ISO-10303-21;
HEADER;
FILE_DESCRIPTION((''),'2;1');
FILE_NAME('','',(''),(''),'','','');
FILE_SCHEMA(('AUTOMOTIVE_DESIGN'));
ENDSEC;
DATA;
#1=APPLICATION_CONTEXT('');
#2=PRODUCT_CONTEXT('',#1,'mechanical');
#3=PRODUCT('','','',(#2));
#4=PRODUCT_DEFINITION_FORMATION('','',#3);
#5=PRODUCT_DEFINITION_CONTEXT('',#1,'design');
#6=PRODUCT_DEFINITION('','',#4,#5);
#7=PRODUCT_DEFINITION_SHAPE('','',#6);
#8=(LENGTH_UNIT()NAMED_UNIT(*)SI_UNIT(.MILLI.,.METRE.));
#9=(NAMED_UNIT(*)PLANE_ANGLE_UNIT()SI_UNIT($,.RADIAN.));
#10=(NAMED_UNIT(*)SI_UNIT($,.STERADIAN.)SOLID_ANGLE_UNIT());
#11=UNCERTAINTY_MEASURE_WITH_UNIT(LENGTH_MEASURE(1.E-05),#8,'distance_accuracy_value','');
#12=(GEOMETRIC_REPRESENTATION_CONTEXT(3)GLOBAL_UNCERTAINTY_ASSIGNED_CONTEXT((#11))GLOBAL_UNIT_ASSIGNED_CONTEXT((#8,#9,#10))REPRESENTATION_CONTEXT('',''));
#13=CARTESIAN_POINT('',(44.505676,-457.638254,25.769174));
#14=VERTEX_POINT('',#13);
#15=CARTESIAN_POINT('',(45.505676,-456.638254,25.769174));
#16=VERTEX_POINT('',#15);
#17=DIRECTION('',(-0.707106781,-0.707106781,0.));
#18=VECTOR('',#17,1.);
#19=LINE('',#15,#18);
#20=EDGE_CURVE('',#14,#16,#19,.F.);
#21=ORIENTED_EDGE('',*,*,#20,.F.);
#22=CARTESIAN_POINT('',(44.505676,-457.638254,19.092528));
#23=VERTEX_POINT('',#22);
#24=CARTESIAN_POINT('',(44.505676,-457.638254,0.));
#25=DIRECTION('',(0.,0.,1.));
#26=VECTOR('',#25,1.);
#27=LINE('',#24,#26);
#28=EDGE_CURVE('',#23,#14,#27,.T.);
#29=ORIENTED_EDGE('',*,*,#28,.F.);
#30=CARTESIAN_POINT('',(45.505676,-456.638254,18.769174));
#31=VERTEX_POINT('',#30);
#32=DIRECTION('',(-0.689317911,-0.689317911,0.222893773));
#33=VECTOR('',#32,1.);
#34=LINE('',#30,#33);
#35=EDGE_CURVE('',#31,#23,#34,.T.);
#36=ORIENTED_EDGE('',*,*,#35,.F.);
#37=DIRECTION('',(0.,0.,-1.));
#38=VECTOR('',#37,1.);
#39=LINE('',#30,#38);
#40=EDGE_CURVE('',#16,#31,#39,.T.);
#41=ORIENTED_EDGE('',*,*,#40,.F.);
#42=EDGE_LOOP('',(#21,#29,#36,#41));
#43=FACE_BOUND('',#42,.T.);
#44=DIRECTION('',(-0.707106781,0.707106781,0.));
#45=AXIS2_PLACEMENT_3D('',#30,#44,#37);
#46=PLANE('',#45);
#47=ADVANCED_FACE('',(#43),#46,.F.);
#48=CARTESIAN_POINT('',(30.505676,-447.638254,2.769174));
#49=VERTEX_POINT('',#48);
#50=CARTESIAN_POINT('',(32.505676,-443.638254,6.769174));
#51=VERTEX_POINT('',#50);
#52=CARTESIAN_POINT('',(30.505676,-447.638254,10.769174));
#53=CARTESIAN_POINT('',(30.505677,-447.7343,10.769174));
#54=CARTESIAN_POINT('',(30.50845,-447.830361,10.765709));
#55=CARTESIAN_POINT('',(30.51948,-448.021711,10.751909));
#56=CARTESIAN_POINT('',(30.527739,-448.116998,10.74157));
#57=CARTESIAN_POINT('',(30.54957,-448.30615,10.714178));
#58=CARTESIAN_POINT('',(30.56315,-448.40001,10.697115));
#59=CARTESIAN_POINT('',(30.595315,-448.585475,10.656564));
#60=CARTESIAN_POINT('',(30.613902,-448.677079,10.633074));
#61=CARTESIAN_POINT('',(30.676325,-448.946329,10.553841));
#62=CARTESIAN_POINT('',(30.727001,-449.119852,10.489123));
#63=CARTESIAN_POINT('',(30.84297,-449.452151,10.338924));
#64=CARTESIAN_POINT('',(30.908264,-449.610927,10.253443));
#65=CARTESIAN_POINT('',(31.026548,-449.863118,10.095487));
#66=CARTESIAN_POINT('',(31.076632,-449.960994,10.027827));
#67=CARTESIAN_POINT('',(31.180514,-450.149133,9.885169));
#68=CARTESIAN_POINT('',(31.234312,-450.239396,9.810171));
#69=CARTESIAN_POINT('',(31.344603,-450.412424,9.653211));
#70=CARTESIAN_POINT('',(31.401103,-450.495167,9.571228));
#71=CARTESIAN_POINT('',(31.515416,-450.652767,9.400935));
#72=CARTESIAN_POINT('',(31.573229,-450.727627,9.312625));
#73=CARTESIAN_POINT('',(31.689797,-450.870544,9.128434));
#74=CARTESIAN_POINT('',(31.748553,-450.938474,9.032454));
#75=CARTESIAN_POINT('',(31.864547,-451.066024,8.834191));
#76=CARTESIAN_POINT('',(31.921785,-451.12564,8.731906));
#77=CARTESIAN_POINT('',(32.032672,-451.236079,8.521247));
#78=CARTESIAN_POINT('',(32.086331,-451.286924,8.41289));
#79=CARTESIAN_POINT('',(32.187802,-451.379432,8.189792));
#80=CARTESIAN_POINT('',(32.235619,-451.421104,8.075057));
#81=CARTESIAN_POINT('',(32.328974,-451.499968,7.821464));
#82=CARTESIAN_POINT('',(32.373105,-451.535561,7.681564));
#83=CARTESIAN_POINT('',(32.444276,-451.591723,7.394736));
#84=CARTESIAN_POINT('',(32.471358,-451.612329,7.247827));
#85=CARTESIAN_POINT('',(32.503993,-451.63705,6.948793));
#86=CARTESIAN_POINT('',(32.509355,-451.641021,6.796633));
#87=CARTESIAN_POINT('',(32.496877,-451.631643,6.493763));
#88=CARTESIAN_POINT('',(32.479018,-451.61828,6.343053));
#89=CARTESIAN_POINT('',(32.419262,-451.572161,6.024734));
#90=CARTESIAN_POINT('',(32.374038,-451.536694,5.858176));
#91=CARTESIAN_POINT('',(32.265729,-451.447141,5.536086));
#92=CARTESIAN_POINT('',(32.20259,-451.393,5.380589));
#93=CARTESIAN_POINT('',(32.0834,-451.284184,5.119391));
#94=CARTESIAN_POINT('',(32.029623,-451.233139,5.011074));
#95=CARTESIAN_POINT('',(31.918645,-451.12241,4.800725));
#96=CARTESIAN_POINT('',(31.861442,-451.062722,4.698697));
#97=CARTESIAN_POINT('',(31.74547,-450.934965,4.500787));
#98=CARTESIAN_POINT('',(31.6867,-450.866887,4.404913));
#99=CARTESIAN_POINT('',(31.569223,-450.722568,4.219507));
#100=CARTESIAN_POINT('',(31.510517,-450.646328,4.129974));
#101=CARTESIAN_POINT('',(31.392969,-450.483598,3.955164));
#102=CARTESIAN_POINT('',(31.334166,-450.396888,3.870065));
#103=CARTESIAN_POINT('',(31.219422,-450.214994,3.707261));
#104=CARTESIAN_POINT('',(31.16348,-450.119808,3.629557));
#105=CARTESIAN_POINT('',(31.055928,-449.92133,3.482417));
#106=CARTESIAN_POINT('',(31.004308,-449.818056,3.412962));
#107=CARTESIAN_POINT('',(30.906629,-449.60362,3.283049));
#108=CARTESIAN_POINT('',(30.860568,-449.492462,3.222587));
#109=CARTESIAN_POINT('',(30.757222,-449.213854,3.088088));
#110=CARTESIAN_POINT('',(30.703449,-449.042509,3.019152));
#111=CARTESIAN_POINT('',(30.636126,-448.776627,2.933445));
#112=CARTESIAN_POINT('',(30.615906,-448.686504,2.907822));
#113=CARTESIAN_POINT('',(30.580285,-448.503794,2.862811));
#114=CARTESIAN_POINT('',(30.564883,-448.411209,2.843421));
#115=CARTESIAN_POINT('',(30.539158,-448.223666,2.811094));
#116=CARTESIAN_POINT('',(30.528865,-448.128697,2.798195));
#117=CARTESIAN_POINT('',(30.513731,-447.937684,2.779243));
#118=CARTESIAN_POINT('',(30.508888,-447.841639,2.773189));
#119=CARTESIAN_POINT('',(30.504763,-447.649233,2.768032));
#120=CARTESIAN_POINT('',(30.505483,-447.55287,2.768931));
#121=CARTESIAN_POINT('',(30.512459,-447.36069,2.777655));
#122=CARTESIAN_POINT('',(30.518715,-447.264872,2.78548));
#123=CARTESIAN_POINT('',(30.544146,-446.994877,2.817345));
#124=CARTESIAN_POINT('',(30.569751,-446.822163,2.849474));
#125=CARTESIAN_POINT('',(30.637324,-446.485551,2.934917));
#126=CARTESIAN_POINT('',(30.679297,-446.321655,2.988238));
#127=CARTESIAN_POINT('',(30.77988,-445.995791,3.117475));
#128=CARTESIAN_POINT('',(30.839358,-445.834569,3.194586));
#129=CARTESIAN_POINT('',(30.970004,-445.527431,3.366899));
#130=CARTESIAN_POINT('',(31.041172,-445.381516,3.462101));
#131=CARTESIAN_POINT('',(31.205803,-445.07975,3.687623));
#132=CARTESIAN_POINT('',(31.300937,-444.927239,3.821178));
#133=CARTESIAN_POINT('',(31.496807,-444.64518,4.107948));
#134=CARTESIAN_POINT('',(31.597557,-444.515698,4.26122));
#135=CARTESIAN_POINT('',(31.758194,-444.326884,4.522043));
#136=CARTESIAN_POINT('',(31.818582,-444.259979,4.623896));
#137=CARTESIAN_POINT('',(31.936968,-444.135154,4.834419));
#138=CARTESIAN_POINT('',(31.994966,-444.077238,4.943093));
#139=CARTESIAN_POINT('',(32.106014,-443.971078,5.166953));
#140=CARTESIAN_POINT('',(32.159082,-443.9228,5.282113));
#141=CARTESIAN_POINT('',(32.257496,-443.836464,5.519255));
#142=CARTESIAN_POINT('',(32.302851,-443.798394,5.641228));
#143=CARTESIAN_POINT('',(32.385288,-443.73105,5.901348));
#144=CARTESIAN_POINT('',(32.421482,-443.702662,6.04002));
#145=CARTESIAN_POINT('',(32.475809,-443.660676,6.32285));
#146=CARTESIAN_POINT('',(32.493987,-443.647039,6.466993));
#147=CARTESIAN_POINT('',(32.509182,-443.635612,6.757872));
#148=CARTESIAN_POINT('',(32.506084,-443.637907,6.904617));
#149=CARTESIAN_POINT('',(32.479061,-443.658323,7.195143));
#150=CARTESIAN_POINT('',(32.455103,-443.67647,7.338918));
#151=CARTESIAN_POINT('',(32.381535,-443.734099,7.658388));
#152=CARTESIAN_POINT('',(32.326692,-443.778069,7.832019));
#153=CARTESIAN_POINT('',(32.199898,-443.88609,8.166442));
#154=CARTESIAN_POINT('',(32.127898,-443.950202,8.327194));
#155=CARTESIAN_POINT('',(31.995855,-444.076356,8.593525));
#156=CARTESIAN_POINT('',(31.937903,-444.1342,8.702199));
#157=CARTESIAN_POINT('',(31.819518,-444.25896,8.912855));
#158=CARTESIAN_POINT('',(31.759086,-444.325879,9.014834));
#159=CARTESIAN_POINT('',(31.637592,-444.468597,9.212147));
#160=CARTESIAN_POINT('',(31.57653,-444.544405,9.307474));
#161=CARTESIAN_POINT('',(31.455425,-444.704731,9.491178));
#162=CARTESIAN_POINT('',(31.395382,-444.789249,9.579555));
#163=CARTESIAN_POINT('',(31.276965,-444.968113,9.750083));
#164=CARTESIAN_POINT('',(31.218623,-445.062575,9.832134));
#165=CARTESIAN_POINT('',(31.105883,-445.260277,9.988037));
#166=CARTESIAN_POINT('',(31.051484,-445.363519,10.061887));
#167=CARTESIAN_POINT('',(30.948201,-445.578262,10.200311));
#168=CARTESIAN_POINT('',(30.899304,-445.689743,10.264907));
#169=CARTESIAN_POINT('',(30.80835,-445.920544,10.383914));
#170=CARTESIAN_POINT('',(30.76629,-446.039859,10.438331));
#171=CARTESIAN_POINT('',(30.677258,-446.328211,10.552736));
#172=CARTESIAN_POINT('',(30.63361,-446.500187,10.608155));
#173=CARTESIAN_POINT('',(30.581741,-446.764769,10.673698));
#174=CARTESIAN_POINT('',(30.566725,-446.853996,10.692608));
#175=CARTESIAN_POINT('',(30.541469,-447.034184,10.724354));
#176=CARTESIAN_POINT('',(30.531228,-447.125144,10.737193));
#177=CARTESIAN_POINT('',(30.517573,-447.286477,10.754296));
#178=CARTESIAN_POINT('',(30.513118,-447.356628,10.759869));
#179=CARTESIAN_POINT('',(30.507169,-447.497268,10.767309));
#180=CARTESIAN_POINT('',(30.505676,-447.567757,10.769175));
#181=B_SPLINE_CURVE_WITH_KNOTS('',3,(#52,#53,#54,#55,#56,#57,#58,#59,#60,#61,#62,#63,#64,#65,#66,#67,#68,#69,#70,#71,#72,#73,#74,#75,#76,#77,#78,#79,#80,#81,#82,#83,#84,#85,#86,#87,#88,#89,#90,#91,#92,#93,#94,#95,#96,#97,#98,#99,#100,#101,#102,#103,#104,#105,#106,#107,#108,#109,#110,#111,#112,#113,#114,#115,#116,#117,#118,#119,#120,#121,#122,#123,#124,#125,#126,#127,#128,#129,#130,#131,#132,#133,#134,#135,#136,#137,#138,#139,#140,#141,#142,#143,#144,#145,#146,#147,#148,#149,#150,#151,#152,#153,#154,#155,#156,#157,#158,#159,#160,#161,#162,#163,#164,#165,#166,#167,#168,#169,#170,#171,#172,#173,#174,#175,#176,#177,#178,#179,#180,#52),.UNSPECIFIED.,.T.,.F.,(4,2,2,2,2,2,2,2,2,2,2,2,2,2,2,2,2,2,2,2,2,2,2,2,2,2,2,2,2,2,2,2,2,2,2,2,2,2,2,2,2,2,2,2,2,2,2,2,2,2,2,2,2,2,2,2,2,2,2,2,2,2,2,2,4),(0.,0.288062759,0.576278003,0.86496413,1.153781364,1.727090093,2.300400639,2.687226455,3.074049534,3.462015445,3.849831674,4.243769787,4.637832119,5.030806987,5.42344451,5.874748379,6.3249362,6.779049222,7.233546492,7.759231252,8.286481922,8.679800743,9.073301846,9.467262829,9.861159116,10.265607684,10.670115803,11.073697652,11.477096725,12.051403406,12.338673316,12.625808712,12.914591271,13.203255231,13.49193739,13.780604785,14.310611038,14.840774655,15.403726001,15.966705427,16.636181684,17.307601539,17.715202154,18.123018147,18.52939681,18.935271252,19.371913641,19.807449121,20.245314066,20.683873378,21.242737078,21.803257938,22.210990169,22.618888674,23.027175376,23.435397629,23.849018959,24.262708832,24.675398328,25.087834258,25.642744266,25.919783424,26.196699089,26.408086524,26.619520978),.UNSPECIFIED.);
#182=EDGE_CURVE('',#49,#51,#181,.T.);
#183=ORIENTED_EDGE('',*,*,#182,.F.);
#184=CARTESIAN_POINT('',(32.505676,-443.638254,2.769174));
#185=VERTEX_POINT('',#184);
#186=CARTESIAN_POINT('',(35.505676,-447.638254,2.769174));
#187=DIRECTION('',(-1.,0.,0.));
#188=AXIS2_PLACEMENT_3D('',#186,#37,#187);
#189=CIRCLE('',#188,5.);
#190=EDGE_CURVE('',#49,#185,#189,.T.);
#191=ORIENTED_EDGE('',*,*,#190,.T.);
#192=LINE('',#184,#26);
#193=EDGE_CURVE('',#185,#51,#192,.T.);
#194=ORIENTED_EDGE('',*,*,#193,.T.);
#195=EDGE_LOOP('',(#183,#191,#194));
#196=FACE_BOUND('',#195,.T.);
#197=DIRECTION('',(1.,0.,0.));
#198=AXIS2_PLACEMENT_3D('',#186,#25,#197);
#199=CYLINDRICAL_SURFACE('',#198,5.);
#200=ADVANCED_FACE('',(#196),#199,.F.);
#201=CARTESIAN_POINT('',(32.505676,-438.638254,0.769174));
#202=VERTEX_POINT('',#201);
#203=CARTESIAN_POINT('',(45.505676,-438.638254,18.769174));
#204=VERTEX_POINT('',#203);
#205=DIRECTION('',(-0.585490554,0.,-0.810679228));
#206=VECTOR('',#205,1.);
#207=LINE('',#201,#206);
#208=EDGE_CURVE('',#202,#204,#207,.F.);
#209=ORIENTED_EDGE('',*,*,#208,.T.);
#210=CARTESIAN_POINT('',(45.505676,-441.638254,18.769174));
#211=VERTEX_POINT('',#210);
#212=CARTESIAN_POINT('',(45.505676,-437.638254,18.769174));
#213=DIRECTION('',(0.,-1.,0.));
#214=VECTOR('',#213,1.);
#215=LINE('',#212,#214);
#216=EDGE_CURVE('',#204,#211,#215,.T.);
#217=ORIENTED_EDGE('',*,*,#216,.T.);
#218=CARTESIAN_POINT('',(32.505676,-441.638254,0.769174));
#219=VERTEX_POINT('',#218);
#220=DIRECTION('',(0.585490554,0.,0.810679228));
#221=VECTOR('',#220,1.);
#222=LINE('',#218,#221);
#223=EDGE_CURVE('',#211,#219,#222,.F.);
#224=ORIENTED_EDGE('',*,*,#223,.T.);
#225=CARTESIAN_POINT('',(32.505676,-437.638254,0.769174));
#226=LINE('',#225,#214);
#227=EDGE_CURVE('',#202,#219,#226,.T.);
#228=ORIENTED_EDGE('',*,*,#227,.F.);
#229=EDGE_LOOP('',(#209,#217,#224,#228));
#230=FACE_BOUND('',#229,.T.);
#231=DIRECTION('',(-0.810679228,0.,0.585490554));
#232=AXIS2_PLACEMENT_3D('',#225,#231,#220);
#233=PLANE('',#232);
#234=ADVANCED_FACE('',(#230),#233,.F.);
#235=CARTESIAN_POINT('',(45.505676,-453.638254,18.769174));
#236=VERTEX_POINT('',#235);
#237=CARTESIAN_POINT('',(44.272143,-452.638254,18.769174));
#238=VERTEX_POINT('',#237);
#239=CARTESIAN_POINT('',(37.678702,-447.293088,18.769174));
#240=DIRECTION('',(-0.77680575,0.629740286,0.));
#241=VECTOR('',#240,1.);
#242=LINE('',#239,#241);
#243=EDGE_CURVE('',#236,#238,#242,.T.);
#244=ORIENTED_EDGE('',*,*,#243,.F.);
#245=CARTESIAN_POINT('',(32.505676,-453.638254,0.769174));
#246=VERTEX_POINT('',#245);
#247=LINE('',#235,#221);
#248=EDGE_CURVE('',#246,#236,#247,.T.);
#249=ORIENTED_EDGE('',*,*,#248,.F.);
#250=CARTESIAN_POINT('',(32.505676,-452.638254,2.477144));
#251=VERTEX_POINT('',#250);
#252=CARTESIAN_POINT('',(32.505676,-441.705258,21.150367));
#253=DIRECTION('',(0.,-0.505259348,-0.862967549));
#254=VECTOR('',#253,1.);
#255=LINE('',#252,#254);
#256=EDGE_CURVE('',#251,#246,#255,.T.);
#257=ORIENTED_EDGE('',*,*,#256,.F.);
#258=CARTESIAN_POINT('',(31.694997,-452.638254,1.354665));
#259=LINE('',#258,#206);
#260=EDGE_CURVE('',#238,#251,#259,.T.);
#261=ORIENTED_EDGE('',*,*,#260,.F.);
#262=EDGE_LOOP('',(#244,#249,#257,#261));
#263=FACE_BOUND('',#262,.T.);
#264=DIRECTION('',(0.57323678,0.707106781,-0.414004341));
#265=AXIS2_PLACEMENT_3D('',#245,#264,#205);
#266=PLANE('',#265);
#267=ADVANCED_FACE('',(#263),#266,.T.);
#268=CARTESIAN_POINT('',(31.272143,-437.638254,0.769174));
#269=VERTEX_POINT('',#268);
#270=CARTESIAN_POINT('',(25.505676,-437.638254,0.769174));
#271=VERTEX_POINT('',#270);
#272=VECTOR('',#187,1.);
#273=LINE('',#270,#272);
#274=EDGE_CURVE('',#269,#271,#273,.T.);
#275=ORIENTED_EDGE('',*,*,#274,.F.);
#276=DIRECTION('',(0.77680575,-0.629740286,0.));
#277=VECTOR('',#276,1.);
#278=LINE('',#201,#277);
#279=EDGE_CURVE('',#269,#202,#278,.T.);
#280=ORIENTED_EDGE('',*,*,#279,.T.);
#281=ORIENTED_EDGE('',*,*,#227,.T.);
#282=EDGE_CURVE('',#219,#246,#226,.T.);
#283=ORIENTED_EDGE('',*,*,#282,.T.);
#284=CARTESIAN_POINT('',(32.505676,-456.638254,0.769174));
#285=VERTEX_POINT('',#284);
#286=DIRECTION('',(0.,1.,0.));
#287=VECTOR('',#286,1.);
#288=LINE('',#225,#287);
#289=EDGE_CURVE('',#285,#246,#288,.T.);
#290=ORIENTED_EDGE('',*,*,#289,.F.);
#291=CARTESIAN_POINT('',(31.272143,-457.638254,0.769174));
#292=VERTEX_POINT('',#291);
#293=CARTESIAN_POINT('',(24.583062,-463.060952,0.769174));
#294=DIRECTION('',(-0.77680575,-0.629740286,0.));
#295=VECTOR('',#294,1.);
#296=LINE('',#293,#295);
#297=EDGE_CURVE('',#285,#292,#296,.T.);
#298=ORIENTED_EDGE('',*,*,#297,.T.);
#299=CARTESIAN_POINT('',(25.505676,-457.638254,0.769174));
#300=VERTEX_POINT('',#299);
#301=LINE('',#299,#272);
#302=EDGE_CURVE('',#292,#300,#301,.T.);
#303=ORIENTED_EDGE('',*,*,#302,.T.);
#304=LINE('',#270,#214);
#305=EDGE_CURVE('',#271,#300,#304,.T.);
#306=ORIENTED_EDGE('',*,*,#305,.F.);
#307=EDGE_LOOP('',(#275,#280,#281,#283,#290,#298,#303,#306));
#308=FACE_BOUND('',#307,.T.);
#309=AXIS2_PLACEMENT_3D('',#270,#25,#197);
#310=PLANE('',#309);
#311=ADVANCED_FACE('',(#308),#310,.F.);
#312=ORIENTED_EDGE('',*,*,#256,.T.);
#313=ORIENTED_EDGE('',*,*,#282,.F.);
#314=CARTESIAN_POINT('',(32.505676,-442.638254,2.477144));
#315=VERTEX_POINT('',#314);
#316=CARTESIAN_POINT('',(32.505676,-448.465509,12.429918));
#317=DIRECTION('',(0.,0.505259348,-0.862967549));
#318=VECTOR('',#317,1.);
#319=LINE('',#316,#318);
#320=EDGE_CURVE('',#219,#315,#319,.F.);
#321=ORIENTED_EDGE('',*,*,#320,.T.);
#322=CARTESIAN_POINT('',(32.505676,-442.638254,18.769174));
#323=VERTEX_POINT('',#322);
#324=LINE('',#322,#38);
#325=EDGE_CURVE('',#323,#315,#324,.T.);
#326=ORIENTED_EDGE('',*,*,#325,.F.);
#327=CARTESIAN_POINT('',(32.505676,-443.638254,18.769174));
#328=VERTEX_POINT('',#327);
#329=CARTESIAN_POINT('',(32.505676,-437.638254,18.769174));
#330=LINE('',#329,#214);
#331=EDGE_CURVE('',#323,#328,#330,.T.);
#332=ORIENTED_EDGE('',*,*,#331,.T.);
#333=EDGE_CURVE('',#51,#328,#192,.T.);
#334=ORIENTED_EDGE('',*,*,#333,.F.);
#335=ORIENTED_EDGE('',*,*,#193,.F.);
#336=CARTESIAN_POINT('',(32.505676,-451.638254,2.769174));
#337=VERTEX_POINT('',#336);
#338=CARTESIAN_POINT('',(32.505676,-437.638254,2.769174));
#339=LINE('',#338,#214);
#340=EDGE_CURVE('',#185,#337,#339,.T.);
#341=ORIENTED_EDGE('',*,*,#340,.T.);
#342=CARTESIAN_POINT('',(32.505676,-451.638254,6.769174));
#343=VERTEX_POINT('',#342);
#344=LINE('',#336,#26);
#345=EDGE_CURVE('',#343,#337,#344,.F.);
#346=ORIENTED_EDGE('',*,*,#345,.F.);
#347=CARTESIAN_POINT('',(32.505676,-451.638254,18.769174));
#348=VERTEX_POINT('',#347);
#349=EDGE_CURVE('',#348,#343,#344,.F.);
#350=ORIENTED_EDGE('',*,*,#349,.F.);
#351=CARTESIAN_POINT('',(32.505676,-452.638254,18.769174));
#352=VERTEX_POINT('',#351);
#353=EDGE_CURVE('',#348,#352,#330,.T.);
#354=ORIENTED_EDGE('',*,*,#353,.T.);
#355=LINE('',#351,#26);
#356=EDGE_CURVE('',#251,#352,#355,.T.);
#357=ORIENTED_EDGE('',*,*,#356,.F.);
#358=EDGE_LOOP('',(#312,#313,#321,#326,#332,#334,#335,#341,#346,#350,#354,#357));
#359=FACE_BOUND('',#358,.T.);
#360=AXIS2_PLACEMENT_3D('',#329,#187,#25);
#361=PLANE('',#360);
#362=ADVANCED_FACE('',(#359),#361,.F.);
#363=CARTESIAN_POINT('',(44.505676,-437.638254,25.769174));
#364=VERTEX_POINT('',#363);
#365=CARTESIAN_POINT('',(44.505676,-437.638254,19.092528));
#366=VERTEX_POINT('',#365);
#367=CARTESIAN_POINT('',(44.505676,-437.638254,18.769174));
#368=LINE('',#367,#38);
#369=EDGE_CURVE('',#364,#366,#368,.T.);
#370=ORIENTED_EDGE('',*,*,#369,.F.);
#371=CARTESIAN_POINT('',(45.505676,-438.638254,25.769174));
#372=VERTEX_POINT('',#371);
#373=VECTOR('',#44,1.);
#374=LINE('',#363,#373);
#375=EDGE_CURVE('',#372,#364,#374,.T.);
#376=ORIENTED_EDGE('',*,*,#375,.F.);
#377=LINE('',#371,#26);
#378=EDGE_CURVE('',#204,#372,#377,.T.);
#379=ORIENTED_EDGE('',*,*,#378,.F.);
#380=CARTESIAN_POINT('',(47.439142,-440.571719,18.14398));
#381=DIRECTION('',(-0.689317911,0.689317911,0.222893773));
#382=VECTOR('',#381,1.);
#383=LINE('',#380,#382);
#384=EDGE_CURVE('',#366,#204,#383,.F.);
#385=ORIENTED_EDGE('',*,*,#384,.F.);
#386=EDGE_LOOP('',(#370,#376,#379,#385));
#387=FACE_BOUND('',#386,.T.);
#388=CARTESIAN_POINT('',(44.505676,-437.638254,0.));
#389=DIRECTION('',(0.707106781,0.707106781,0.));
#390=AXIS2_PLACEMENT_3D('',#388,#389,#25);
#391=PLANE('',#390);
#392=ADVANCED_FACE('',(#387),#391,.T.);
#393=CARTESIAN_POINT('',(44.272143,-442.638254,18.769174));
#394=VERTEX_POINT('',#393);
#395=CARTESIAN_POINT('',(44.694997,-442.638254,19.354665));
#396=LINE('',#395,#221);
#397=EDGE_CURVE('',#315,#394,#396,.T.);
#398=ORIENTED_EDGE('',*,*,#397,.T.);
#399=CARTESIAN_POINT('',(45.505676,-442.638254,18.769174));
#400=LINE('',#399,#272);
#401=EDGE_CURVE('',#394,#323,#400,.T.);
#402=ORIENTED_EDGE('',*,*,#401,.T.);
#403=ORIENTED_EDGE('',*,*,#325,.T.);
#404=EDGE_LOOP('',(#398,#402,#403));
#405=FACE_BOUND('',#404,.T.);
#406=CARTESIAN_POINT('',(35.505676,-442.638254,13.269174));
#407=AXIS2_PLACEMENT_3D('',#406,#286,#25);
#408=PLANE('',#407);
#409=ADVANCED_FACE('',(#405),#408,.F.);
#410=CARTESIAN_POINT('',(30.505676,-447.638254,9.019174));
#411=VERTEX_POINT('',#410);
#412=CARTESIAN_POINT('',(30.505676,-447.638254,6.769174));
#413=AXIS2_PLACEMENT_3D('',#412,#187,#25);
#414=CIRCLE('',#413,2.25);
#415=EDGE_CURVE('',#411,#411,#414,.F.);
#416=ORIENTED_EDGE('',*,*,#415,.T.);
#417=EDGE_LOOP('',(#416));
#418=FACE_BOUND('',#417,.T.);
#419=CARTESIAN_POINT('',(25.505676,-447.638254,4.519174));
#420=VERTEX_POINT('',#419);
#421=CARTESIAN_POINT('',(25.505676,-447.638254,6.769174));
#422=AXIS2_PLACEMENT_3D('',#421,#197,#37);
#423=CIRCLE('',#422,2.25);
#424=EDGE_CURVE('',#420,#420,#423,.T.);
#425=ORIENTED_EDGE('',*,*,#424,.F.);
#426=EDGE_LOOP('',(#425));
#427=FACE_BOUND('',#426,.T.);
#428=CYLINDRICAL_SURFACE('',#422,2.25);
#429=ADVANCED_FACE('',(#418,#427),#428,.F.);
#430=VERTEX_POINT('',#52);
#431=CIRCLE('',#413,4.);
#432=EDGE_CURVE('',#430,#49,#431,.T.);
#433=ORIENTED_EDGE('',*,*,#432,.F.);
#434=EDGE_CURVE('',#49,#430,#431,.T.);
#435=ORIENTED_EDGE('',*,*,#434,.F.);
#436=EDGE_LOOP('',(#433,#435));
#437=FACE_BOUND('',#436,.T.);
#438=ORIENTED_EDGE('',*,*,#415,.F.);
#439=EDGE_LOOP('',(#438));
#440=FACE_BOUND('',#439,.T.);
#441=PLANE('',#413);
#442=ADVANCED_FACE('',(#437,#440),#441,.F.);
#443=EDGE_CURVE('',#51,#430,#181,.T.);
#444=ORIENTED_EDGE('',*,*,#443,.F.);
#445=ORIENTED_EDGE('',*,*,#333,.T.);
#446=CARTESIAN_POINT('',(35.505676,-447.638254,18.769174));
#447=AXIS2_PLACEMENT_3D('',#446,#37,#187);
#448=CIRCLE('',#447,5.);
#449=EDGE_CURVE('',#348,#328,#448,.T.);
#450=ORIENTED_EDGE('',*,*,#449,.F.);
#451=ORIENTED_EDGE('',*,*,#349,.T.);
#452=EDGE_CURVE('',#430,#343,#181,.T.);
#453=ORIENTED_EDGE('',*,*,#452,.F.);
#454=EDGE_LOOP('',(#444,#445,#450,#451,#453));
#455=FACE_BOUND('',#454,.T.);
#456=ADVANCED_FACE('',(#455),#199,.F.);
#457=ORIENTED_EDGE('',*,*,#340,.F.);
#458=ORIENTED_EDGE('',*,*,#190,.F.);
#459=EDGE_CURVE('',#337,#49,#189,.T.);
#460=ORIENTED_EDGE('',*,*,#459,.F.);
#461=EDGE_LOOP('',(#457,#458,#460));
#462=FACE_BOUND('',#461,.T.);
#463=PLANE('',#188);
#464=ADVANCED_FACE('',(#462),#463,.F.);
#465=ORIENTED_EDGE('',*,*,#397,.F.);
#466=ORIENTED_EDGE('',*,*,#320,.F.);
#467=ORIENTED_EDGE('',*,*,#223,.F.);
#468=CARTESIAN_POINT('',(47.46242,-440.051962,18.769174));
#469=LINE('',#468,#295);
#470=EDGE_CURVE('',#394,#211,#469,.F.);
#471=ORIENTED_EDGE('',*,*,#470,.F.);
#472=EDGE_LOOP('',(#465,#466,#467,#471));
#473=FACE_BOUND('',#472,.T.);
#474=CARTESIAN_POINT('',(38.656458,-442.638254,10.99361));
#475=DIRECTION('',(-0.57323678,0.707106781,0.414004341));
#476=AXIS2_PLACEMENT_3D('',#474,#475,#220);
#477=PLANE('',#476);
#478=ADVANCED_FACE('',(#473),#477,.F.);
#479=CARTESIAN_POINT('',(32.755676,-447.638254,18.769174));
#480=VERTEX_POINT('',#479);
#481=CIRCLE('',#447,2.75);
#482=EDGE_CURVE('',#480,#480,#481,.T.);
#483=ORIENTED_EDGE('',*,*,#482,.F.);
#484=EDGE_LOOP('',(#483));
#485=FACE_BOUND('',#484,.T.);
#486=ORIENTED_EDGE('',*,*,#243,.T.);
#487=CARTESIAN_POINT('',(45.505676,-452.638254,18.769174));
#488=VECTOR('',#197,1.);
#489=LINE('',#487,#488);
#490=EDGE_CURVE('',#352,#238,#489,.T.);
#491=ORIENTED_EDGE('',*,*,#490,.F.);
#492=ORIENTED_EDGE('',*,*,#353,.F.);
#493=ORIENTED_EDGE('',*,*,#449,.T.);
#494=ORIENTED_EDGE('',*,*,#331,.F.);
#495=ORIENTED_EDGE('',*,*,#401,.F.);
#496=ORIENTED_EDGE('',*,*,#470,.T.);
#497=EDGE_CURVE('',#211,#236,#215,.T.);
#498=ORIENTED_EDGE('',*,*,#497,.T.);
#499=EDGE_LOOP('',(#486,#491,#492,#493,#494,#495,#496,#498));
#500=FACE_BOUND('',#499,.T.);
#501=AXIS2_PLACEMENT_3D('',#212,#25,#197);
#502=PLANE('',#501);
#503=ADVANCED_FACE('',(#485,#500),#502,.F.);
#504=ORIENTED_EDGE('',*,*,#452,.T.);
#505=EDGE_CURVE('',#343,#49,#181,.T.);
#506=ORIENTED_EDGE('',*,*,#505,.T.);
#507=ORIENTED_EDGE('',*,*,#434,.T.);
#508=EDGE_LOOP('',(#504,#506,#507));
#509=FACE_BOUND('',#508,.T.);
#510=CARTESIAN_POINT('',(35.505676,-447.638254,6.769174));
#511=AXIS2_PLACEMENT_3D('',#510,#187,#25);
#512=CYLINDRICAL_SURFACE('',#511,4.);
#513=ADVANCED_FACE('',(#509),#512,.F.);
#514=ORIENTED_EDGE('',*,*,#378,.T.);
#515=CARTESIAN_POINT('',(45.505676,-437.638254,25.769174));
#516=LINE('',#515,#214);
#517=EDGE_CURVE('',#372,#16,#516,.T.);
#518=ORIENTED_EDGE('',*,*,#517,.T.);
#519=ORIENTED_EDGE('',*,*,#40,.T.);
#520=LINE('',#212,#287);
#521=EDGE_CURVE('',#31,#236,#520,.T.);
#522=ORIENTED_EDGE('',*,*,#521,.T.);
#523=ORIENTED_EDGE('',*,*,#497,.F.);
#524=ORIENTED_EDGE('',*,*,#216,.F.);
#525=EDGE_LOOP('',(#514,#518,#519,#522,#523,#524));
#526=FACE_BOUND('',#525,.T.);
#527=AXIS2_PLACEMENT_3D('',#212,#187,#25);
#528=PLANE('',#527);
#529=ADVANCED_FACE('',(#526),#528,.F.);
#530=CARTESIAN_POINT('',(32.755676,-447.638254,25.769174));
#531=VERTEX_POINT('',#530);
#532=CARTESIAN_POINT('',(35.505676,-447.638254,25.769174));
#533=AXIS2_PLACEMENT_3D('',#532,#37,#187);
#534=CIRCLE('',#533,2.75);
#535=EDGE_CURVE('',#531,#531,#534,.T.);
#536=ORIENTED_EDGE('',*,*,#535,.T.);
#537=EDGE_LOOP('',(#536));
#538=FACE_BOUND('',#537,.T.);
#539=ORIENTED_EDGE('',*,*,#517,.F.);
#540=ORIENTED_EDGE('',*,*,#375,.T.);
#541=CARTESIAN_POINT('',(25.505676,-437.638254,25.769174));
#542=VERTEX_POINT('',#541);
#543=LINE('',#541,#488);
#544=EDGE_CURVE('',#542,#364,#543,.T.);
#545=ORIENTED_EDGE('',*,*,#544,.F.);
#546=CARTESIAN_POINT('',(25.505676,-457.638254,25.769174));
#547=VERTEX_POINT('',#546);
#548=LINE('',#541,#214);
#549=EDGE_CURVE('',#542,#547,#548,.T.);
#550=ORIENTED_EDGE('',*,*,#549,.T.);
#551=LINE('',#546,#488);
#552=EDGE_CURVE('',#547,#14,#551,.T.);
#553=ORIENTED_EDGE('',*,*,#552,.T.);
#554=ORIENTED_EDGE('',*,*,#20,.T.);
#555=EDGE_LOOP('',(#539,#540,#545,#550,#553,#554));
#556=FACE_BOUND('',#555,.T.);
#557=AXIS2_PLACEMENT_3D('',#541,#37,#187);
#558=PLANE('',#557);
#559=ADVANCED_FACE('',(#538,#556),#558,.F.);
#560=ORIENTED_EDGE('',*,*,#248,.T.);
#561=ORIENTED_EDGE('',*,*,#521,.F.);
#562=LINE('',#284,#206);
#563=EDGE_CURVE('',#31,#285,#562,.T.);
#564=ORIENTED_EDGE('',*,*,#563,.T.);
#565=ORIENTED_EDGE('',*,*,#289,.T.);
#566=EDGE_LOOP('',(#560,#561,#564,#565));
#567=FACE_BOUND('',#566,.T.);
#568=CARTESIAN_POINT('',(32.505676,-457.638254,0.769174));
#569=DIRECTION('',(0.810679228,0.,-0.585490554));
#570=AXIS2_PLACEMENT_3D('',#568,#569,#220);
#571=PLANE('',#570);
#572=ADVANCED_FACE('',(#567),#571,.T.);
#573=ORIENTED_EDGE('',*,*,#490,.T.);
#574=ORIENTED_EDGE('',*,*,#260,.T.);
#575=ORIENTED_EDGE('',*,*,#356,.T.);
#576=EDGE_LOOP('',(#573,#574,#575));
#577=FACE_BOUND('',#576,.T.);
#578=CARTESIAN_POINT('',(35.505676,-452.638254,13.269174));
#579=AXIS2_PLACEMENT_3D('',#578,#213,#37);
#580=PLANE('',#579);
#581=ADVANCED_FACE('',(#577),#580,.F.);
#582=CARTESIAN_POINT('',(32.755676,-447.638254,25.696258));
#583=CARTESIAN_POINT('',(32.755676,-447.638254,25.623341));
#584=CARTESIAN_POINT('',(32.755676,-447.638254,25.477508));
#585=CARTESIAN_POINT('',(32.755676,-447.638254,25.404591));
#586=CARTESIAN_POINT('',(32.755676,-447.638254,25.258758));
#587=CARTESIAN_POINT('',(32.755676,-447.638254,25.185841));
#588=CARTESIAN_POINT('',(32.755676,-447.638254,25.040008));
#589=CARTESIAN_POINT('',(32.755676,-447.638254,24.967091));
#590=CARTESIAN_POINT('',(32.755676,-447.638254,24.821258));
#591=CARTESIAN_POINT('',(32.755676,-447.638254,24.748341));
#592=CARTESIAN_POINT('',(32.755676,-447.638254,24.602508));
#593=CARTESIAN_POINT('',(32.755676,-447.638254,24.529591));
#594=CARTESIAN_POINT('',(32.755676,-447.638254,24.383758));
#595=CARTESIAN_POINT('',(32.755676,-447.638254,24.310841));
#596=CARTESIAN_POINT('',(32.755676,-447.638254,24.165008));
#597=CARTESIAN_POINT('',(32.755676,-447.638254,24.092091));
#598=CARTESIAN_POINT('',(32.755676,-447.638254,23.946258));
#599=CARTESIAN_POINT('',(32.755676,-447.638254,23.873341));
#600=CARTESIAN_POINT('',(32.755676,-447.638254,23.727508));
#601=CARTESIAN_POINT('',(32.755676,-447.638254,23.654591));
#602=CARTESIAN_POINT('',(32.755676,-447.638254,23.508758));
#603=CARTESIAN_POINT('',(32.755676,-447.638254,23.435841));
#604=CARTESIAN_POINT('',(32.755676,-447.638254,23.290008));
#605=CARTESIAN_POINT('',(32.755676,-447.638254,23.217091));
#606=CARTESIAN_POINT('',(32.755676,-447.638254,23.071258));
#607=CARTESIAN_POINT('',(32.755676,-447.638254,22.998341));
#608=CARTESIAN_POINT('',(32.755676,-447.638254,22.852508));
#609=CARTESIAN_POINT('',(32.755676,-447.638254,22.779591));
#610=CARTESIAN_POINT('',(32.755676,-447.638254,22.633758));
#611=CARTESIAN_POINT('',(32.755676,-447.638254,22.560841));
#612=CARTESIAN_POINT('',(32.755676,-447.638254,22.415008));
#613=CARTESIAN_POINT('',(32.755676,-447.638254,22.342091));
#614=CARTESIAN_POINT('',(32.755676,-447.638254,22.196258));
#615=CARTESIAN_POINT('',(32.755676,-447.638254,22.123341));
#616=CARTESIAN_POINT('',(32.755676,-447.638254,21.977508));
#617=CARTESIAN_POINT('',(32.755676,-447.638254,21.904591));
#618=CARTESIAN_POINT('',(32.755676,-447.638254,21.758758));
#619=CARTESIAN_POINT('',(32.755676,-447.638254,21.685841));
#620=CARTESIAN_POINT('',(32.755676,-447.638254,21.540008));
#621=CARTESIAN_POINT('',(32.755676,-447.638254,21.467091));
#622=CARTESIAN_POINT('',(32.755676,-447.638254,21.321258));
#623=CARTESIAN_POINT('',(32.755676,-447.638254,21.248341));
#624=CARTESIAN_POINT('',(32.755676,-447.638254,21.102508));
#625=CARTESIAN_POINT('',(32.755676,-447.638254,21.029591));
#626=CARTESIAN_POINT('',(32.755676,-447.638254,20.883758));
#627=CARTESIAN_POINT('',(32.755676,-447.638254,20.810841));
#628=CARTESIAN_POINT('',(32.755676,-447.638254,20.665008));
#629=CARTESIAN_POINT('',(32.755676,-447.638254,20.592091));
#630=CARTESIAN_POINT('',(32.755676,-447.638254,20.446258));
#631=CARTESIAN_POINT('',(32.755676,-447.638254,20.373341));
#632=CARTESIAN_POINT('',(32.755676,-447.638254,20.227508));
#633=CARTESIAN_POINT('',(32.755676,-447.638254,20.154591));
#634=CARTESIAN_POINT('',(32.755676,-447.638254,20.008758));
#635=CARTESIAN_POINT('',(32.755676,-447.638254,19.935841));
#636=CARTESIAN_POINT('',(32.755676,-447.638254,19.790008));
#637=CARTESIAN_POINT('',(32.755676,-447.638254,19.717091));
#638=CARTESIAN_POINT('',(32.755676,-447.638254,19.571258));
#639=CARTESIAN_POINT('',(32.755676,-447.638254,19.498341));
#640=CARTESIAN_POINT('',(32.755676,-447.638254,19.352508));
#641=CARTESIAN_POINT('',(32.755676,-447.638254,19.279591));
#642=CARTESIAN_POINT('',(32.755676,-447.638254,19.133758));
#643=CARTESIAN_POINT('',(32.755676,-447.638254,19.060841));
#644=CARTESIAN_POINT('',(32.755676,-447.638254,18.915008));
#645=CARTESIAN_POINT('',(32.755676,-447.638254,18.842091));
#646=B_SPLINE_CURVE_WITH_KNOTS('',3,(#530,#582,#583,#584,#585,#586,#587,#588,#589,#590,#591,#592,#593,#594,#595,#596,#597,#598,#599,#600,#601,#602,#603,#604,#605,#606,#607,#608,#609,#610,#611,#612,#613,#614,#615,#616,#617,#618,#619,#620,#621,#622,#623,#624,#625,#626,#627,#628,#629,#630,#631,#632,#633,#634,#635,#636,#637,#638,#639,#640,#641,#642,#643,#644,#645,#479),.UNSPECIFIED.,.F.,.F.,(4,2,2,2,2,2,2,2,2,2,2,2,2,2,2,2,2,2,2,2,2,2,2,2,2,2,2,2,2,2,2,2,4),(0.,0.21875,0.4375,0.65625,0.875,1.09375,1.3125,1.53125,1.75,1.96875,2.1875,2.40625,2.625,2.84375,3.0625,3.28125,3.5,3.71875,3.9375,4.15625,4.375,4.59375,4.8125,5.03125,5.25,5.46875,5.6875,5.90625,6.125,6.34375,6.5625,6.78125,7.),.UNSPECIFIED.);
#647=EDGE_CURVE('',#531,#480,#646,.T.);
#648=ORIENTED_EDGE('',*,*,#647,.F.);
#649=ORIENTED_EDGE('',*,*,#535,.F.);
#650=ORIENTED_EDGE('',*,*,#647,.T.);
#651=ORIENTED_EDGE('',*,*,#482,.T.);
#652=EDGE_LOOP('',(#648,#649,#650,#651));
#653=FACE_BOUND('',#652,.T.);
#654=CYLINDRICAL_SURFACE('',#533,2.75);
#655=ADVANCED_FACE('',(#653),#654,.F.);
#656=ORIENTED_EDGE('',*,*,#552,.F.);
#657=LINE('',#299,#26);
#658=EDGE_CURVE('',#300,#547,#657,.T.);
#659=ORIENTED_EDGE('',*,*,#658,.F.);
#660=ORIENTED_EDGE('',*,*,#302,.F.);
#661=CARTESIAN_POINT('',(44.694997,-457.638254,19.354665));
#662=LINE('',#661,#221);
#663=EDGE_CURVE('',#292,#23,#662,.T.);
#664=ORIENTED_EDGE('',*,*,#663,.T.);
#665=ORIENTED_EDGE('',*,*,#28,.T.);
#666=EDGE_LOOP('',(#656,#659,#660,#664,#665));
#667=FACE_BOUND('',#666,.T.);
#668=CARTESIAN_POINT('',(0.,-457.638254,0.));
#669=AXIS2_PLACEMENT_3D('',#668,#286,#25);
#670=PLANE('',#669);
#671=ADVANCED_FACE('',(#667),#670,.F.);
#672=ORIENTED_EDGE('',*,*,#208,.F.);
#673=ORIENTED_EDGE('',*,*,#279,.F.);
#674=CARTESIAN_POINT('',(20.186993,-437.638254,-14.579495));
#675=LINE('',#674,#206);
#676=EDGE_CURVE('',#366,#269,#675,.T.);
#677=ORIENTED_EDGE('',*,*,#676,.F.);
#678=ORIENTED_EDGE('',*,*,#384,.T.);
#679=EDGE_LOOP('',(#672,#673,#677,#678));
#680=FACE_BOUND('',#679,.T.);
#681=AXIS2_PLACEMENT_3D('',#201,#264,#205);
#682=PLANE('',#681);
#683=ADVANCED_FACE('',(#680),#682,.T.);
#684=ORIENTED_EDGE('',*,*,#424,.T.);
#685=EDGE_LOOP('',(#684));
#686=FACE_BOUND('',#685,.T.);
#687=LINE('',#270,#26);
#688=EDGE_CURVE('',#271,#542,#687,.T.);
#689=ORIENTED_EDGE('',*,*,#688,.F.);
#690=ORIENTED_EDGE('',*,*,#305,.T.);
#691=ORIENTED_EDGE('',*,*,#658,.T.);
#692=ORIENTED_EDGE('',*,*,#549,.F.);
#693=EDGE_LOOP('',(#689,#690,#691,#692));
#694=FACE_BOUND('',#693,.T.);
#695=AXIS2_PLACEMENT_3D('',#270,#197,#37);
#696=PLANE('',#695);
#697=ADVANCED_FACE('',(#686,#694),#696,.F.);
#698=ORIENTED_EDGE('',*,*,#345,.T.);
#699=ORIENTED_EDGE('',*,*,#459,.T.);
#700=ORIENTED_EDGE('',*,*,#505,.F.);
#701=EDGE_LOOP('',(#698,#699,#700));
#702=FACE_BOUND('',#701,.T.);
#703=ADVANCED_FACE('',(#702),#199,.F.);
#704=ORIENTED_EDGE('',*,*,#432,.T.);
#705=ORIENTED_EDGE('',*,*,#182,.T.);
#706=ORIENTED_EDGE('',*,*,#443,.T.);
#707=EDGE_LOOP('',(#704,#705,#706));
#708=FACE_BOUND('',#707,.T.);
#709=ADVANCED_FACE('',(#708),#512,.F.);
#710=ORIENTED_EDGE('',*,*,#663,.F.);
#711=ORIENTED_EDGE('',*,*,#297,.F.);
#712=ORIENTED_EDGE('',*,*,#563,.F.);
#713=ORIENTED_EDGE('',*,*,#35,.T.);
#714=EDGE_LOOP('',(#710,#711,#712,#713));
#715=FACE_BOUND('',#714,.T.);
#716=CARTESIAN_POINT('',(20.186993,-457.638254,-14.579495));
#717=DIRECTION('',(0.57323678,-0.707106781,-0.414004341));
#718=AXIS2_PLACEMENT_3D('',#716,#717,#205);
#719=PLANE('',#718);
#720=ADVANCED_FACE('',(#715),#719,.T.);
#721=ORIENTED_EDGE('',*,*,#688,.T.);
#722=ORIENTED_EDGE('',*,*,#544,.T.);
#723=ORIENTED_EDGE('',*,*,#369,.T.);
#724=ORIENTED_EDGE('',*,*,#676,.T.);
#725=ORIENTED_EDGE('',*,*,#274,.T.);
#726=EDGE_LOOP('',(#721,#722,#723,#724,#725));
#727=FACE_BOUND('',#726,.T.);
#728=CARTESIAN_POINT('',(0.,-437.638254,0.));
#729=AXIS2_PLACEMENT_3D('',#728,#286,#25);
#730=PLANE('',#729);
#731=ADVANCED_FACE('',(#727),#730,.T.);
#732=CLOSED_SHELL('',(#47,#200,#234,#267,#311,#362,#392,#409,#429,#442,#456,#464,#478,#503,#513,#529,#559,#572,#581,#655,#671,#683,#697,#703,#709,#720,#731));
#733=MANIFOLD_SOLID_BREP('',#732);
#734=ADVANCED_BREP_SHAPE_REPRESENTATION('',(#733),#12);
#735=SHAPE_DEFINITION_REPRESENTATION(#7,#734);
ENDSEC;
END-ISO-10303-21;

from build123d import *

# Parameters (mm, degrees)
MAIN_DEPTH         = 20
SKETCH3_R          = 2.25
SCREW_HOLE_DEPTH   = 459.547512827
SKETCH4_R          = 2.75
SCREW_HOLE_2_DEPTH = 461.247257207
SCREW_CUT_R        = 5
SCREWCUT_DEPTH     = 16
CUT_EXTRUDE7_START = -5
SKETCH7_R          = 4
CUT_EXTRUDE7_DEPTH = 5
RIB3_REACH         = 57.989
SKETCH8_WALL_W     = 136.182475206
SKETCH8_WALL_H     = 5
RIB4_REACH         = 57.989
SKETCH9_WALL_W     = 136.182475206
SKETCH9_WALL_H     = 5
CHAMFER1_SIZE      = 1


with BuildPart() as part:
    # Sketch2 → main (new body)
    with BuildSketch(Plane(origin=(0, -457.638253618, -1.412254138), x_dir=(1, 0, 0), z_dir=(0, 1, 0))):
        Polygon((25.505676484, -2.181428465), (32.505676484, -2.181428465), (32.505676484, -20.181428465), (45.505676484, -20.181428465), (45.505676484, -27.181428465), (25.505676484, -27.181428465), align=None)
    extrude(amount=MAIN_DEPTH)

    # Sketch3 → screw_hole (cut, through all)
    with BuildSketch(Plane(origin=(32.505676484, 0, 0), x_dir=(0, 0, -1), z_dir=(1, 0, 0))):
        with Locations((-6.769174326, -447.638253618)):
            Circle(SKETCH3_R)
    extrude(amount=-SCREW_HOLE_DEPTH, mode=Mode.SUBTRACT)

    # Sketch4 → screw_hole_2 (cut, through all)
    with BuildSketch(Plane(origin=(0, 0, 18.769174326), x_dir=(-1, 0, 0), z_dir=(0, 0, -1))):
        with Locations((-35.505676484, -447.638253618)):
            Circle(SKETCH4_R)
    extrude(amount=-SCREW_HOLE_2_DEPTH, mode=Mode.SUBTRACT)

    # screw_cut → screwcut (cut)
    with BuildSketch(Plane(origin=(0, 0, 18.769174326), x_dir=(-1, 0, 0), z_dir=(0, 0, -1))):
        with Locations((-35.505676484, -447.638253618)):
            Circle(SCREW_CUT_R)
    extrude(amount=SCREWCUT_DEPTH, mode=Mode.SUBTRACT)

    # Sketch7 → Cut-Extrude7 (cut)
    with BuildSketch(Plane.ZY.offset(-25.505676484).offset(CUT_EXTRUDE7_START)):
        with Locations((6.769174326, -447.638253618)):
            Circle(SKETCH7_R)
    extrude(amount=-CUT_EXTRUDE7_DEPTH, mode=Mode.SUBTRACT)

    # Sketch8 wall → Rib3 (add, up to next)
    with BuildSketch(Plane(origin=(39.005676484, -457.638253618, 9.769174326), x_dir=(0.585490553844, 0, 0.8106792284), z_dir=(-0.8106792284, 0, 0.585490553844)), mode=Mode.PRIVATE) as rib3_sk1:
        with Locations((0, 2.5)):
            Rectangle(SKETCH8_WALL_W, SKETCH8_WALL_H)
    rib3_tool1 = extrude(rib3_sk1.sketch, amount=RIB3_REACH, mode=Mode.PRIVATE) - part.part
    add(rib3_tool1.solids().sort_by_distance((39.005676484, -457.638253618, 9.769174326))[0])

    # Sketch9 wall → Rib4 (add, up to next)
    with BuildSketch(Plane(origin=(39.005676484, -437.638253618, 9.769174326), x_dir=(0.585490553844, 0, 0.8106792284), z_dir=(0.8106792284, 0, -0.585490553844)), mode=Mode.PRIVATE) as rib4_sk1:
        with Locations((0, 2.5)):
            Rectangle(SKETCH9_WALL_W, SKETCH9_WALL_H)
    rib4_tool1 = extrude(rib4_sk1.sketch, amount=-RIB4_REACH, mode=Mode.PRIVATE) - part.part
    add(rib4_tool1.solids().sort_by_distance((39.005676484, -437.638253618, 9.769174326))[0])

    # Chamfer1
    chamfer1_edges = [part.edges().sort_by_distance(p)[0] for p in [
        (39.005676484, -437.638253618, 9.769174326),
        (45.505676484, -437.638253618, 22.269174326),
        (39.005676484, -457.638253618, 9.769174326),
        (45.505676484, -457.638253618, 22.269174326),
        (39.005676484, -452.638253618, 9.769174326),
        (39.005676484, -442.638253618, 9.769174326),
    ]]
    chamfer(chamfer1_edges, length=CHAMFER1_SIZE)


solid = part.part
